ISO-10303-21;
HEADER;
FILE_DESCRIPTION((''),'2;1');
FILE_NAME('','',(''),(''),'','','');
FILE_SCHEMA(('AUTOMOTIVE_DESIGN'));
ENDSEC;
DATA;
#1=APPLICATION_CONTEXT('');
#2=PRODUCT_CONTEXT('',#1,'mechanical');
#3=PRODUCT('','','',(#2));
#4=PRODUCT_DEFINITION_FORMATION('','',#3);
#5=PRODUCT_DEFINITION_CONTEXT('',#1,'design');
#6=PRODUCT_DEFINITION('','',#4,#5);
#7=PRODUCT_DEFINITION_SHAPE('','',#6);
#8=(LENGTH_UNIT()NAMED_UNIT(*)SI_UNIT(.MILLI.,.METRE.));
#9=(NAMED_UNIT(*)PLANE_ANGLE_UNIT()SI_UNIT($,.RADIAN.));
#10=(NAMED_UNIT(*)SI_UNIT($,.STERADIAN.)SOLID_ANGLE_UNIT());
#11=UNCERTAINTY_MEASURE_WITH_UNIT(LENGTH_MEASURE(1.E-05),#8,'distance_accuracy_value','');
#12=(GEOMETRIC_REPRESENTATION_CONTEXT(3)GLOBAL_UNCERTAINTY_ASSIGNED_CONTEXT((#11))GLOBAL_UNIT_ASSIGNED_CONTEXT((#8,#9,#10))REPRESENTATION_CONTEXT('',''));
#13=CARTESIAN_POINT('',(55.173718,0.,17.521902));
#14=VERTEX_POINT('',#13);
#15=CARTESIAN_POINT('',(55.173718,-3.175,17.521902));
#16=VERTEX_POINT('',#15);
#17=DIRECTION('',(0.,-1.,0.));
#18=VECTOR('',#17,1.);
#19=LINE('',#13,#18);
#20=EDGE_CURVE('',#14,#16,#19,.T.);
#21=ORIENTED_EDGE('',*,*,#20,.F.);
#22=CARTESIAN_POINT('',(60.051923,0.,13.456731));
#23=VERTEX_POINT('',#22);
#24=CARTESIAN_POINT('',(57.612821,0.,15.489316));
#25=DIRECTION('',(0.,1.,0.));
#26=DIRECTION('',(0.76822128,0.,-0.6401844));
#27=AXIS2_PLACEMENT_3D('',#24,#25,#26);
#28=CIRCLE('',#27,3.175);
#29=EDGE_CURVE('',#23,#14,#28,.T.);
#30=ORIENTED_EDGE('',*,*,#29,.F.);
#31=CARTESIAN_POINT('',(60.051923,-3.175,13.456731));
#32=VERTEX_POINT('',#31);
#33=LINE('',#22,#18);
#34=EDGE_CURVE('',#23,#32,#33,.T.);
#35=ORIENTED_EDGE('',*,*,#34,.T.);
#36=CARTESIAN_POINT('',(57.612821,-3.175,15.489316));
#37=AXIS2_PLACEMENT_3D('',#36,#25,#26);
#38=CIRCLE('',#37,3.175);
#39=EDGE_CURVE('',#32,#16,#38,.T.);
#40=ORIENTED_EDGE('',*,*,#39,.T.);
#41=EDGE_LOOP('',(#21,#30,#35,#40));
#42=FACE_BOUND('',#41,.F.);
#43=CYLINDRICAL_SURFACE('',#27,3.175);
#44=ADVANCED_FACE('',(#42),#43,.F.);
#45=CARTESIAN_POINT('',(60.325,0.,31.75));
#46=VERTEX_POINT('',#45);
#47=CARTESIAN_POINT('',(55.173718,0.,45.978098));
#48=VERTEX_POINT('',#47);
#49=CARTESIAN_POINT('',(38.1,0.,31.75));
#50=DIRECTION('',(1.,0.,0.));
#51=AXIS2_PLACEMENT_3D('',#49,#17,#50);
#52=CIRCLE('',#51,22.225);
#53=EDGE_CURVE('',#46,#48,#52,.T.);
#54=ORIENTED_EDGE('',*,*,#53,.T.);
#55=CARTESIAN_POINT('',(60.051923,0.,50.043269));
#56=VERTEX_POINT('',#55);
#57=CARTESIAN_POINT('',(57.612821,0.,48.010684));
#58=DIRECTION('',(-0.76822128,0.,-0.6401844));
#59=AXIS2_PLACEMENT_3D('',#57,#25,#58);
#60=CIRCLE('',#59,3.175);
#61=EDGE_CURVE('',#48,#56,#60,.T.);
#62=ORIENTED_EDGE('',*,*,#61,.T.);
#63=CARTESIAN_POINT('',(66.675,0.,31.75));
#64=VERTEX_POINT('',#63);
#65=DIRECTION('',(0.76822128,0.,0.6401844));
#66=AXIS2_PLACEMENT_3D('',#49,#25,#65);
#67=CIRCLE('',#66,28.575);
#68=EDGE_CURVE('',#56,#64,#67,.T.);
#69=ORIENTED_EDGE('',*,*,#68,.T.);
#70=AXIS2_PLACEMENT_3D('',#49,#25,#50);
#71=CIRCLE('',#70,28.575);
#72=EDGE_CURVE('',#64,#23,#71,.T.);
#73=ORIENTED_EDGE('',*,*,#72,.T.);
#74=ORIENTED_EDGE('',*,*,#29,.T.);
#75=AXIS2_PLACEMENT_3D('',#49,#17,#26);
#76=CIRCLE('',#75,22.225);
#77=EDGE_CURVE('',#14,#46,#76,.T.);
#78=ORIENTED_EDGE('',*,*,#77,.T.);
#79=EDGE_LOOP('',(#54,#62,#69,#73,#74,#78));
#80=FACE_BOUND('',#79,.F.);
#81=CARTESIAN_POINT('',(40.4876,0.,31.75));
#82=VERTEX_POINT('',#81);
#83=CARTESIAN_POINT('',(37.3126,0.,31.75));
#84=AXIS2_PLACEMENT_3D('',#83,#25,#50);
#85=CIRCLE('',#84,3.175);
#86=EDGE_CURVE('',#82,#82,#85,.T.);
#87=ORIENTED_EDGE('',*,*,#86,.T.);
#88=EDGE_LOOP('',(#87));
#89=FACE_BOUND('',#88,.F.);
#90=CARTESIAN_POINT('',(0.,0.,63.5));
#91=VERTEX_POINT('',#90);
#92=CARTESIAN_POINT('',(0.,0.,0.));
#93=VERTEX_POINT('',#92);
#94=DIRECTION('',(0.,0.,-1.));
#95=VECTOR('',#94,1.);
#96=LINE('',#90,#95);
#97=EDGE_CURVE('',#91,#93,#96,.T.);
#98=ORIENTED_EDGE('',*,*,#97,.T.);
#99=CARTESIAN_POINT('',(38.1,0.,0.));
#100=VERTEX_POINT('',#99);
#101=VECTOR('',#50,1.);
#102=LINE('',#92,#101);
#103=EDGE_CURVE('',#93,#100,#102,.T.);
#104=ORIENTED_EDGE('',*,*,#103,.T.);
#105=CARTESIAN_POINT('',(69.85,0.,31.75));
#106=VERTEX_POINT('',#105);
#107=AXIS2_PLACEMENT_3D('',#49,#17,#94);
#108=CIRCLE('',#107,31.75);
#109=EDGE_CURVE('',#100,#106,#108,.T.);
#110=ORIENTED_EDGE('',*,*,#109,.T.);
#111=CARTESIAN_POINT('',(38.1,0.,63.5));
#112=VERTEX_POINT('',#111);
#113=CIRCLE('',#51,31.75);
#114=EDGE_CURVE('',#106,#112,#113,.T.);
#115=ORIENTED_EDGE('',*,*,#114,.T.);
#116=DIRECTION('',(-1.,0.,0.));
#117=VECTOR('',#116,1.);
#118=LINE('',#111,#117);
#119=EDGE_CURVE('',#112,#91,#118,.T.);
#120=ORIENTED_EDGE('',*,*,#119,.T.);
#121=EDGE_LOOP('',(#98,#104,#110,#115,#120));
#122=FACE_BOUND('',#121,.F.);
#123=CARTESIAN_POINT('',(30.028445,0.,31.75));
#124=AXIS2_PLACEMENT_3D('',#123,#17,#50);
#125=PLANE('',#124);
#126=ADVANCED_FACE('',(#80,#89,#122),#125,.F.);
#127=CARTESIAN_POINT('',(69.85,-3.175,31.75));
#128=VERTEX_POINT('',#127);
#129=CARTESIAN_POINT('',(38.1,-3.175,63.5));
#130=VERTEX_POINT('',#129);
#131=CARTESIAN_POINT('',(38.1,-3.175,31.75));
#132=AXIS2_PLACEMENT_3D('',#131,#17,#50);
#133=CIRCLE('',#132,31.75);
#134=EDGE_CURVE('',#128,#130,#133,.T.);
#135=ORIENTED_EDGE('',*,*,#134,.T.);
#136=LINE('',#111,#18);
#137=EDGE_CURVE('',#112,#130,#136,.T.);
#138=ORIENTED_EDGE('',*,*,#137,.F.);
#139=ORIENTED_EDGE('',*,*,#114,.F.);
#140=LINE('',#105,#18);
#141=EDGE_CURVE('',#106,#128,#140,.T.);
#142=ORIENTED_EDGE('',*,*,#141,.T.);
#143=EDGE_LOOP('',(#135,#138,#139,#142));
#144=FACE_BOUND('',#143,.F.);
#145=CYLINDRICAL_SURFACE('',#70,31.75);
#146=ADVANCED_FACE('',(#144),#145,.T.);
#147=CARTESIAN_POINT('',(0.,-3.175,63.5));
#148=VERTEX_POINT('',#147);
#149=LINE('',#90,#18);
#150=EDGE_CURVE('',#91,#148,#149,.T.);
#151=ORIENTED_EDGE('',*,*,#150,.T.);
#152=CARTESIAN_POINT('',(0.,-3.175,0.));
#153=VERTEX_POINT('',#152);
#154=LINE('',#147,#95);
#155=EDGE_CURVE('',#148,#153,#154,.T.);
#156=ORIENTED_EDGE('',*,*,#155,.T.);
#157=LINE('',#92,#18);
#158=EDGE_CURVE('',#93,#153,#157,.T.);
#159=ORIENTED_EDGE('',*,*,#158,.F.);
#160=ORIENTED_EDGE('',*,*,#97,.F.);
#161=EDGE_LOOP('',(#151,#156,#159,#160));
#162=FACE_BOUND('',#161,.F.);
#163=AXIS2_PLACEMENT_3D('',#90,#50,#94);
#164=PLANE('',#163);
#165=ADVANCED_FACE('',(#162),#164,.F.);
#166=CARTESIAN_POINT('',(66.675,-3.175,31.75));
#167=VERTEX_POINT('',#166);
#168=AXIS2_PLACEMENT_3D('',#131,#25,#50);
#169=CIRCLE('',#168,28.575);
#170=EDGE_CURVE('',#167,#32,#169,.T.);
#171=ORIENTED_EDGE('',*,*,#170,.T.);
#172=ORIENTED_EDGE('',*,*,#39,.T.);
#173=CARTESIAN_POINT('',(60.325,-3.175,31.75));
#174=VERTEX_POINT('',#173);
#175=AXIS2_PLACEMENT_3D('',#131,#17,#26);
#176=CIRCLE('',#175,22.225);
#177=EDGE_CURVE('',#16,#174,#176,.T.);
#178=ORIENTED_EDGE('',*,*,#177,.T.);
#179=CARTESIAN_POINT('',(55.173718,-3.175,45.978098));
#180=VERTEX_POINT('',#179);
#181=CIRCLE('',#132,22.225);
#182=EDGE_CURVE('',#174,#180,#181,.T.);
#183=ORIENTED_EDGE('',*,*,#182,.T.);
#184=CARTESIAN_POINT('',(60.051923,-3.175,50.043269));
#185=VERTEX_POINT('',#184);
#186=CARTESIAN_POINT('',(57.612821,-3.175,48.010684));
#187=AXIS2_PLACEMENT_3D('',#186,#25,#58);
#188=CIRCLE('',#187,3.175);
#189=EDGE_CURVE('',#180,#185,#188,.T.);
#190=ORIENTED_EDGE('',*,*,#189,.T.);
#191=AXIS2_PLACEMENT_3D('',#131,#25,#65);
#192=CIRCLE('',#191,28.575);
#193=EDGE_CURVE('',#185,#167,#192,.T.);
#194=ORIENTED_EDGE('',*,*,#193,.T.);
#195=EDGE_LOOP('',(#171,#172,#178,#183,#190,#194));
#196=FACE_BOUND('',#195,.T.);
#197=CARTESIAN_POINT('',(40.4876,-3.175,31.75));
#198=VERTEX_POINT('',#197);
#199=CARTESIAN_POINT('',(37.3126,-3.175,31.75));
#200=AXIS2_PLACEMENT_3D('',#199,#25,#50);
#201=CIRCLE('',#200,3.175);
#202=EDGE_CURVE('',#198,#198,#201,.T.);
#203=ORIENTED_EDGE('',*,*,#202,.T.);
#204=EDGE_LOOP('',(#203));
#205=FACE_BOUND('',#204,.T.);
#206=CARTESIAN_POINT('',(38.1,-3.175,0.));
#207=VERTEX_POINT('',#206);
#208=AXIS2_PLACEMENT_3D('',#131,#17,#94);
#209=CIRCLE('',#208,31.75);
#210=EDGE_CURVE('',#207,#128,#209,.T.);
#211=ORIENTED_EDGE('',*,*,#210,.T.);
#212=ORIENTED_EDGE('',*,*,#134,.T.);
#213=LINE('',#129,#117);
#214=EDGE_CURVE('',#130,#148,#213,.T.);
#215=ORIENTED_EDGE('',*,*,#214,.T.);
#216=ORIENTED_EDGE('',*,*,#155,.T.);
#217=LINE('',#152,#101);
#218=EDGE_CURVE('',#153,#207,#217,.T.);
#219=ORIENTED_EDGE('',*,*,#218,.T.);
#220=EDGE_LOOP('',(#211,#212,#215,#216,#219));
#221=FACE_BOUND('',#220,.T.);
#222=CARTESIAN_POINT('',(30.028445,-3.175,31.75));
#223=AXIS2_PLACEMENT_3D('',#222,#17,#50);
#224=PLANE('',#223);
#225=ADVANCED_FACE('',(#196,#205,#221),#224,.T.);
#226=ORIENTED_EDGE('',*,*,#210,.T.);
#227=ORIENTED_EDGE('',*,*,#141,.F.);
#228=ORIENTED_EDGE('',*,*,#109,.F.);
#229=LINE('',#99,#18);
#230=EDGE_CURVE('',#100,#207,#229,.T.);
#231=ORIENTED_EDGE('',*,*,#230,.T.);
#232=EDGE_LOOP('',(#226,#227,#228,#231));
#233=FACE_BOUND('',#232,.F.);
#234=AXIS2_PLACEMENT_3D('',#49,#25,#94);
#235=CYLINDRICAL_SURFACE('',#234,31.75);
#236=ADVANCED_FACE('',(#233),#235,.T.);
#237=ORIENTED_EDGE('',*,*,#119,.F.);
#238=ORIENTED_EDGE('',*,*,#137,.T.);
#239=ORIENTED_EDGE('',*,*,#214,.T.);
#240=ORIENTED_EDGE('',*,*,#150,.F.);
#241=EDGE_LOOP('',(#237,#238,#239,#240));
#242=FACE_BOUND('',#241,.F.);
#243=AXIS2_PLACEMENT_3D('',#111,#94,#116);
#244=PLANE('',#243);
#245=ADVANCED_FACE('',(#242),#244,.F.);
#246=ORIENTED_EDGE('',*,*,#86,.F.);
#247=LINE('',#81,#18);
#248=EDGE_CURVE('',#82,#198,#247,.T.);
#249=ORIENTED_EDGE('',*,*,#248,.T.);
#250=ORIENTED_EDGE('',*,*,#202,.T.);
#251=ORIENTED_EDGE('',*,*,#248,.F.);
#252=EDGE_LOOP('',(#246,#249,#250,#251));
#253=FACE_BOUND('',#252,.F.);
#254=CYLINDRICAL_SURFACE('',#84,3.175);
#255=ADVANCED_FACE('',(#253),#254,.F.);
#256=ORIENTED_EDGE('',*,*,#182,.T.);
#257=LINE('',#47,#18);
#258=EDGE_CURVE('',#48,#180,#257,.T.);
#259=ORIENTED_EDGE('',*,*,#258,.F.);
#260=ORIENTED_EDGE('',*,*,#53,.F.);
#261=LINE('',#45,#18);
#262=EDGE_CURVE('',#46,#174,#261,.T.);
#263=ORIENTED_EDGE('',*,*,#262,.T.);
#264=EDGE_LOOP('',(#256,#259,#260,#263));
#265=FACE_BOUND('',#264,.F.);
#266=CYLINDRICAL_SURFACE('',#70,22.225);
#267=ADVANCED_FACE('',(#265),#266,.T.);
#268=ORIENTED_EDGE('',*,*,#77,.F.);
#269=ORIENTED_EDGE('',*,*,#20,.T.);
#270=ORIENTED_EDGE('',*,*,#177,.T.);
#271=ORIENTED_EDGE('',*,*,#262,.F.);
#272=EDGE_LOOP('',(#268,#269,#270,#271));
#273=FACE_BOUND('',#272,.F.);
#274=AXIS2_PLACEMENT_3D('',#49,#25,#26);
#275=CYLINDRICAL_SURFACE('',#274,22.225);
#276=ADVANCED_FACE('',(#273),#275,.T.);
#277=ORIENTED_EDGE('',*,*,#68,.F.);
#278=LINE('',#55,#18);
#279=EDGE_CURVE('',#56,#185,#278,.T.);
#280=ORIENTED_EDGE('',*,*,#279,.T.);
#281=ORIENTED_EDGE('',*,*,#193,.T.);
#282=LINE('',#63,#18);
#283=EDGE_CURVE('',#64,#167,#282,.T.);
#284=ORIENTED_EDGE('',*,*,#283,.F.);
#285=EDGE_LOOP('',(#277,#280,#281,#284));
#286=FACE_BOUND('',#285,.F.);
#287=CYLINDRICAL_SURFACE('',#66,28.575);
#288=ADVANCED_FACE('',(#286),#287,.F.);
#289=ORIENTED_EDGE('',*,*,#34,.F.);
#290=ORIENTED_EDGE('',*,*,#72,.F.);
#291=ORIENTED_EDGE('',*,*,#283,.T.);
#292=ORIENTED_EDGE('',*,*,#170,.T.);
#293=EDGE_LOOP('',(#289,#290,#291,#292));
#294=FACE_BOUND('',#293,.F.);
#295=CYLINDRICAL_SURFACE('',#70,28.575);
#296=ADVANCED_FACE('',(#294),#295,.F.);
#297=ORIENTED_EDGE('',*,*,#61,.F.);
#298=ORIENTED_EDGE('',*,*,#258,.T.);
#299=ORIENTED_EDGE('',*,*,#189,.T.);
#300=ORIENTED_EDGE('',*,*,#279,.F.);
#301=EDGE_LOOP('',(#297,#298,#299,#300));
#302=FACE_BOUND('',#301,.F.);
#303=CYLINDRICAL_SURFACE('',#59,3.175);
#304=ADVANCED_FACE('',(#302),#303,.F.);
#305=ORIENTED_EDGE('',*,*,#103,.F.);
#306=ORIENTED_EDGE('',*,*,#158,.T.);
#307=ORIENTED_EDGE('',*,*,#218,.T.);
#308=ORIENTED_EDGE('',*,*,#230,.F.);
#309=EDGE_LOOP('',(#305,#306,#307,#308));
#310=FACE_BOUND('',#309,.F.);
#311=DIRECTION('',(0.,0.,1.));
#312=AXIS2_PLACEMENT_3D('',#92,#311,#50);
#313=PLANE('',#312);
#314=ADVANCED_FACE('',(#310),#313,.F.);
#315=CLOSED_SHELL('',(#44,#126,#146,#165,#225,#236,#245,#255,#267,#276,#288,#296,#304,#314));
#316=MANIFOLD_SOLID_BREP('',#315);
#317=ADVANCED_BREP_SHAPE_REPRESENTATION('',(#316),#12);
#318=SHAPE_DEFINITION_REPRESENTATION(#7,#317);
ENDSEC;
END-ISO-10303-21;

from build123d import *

# Parameters (mm, degrees)
F1_DEPTH = 3.175
F3_DEPTH = 3.175


# Not quite as in the source:
# - a feature names something its author has since deleted; it is built from what else it names


with BuildPart() as f1:
    # F0 (on Front) → F1 (new body)
    with BuildSketch(Plane.XZ):
        with BuildLine():
            Line((0, 63.5), (0, 0))
            Line((0, 0), (38.1, 0))
            ThreePointArc((38.1, 0), (60.5506403027, 9.2993596973), (69.85, 31.75))
            ThreePointArc((69.85, 31.75), (60.5506403027, 54.2006403027), (38.1, 63.5))
            Line((38.1, 63.5), (0, 63.5))
        make_face()
        with BuildLine():
            ThreePointArc((60.0519230645, 50.0432692204), (64.9682603323, 41.4776519117), (66.675, 31.75))
            ThreePointArc((66.675, 31.75), (64.9682603323, 22.0223480883), (60.0519230645, 13.4567307796))
            ThreePointArc((60.0519230645, 13.4567307796), (9.525, 31.75), (60.0519230645, 50.0432692204))
        make_face(mode=Mode.SUBTRACT)
        with BuildLine():
            ThreePointArc((55.1737179391, 17.5219017175), (58.997535814, 24.1840485131), (60.325, 31.75))
            ThreePointArc((60.325, 31.75), (58.997535814, 39.3159514869), (55.1737179391, 45.9780982825))
            ThreePointArc((55.1737179391, 45.9780982825), (15.875, 31.75), (55.1737179391, 17.5219017175))
        make_face()
        with BuildLine():
            ThreePointArc((55.1737179391, 45.9780982825), (55.5802350328, 50.4497863142), (60.0519230645, 50.0432692204))
            ThreePointArc((60.0519230645, 50.0432692204), (9.525, 31.75), (60.0519230645, 13.4567307796))
            ThreePointArc((60.0519230645, 13.4567307796), (55.5802350328, 13.0502136858), (55.1737179391, 17.5219017175))
            ThreePointArc((55.1737179391, 17.5219017175), (15.875, 31.75), (55.1737179391, 45.9780982825))
        make_face()
    extrude(amount=F1_DEPTH)

    # F2 (on face) → F3 (cut)
    with BuildSketch(Plane(origin=(0, 0, 0), x_dir=(-1, 0, 0), z_dir=(0, 1, 0))):
        with BuildLine():
            ThreePointArc((-34.1376, 31.75), (-37.3126, 34.925), (-40.4876, 31.75))
            ThreePointArc((-40.4876, 31.75), (-37.3126, 28.575), (-34.1376, 31.75))
        make_face()
    extrude(amount=-F3_DEPTH, mode=Mode.SUBTRACT)


solid = f1.part
